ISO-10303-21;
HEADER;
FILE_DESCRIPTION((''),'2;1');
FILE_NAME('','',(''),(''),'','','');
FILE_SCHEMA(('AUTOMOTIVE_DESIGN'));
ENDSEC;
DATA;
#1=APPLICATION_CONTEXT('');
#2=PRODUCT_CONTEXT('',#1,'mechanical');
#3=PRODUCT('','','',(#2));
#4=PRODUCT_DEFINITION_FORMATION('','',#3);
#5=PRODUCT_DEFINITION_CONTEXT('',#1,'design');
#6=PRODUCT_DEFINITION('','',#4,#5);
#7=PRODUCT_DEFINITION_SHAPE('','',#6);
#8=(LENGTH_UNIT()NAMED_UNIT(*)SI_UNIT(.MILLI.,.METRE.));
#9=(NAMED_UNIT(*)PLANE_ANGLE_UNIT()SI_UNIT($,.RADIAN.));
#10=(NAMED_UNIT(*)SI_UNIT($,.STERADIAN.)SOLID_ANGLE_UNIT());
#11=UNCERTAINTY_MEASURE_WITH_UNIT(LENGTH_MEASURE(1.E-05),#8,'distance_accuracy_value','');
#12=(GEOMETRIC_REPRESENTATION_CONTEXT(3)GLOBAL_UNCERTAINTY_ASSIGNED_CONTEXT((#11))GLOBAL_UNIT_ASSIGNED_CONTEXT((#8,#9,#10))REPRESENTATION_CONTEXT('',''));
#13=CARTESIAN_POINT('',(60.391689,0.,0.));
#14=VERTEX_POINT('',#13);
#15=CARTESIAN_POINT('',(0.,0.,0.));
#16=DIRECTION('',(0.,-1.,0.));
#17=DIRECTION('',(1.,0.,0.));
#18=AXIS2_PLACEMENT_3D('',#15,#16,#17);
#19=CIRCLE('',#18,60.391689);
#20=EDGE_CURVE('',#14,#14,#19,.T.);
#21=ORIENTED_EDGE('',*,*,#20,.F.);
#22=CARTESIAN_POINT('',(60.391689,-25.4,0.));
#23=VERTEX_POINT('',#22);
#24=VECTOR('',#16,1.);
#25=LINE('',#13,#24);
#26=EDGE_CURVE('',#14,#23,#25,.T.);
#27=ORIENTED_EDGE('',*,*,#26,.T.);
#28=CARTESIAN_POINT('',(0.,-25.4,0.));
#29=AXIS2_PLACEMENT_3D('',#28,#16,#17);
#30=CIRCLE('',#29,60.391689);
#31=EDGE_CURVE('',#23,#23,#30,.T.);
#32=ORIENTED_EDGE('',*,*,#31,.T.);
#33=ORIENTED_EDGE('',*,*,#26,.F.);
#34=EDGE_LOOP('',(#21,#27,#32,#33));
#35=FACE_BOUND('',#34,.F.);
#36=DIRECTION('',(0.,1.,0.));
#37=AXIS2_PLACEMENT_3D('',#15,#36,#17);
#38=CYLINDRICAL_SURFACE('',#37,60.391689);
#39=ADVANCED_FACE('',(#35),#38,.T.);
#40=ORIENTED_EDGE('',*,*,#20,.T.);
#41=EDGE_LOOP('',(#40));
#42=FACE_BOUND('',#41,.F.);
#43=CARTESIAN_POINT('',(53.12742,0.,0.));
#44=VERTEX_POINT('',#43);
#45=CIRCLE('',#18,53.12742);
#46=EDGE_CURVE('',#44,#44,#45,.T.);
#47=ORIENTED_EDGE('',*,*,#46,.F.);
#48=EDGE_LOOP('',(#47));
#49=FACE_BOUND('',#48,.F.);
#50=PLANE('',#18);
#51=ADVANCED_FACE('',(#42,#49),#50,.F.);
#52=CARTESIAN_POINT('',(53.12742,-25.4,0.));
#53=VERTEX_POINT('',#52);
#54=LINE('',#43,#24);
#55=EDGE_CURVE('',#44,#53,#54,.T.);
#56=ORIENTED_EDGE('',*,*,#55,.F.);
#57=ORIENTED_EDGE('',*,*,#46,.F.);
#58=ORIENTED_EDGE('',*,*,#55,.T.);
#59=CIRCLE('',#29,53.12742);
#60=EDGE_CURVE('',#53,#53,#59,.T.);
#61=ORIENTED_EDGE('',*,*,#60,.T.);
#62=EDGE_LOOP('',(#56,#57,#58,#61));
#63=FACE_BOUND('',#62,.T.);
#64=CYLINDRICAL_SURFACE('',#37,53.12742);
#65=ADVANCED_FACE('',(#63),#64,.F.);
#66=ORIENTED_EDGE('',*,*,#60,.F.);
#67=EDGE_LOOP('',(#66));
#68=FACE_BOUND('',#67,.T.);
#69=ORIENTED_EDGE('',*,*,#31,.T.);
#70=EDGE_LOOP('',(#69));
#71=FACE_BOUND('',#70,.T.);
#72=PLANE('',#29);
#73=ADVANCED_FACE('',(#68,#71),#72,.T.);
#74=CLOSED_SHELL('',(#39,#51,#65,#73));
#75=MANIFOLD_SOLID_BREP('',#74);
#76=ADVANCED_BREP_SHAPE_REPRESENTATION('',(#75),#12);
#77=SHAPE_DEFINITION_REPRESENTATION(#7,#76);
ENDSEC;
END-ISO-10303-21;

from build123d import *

# Parameters (mm, degrees)
F0_R     = 60.3916892533
F0_R_2   = 53.1274197444
F3_DEPTH = 25.4
F4_DEPTH = 25.4


# Not quite as in the source:
# - the program builds the solid bodies; features that only make, move or delete a surface that nothing else refers to are left out


with BuildPart() as f3:
    # F0 (on Front) → F3 (new body)
    with BuildSketch(Plane.XZ):
        Circle(F0_R)
        Circle(F0_R_2, mode=Mode.SUBTRACT)
    extrude(amount=F3_DEPTH)

    # F0 (on Front) → F4 (join)
    with BuildSketch(Plane.XZ):
        Circle(F0_R)
        Circle(F0_R_2, mode=Mode.SUBTRACT)
    extrude(amount=F4_DEPTH)


solid = f3.part
